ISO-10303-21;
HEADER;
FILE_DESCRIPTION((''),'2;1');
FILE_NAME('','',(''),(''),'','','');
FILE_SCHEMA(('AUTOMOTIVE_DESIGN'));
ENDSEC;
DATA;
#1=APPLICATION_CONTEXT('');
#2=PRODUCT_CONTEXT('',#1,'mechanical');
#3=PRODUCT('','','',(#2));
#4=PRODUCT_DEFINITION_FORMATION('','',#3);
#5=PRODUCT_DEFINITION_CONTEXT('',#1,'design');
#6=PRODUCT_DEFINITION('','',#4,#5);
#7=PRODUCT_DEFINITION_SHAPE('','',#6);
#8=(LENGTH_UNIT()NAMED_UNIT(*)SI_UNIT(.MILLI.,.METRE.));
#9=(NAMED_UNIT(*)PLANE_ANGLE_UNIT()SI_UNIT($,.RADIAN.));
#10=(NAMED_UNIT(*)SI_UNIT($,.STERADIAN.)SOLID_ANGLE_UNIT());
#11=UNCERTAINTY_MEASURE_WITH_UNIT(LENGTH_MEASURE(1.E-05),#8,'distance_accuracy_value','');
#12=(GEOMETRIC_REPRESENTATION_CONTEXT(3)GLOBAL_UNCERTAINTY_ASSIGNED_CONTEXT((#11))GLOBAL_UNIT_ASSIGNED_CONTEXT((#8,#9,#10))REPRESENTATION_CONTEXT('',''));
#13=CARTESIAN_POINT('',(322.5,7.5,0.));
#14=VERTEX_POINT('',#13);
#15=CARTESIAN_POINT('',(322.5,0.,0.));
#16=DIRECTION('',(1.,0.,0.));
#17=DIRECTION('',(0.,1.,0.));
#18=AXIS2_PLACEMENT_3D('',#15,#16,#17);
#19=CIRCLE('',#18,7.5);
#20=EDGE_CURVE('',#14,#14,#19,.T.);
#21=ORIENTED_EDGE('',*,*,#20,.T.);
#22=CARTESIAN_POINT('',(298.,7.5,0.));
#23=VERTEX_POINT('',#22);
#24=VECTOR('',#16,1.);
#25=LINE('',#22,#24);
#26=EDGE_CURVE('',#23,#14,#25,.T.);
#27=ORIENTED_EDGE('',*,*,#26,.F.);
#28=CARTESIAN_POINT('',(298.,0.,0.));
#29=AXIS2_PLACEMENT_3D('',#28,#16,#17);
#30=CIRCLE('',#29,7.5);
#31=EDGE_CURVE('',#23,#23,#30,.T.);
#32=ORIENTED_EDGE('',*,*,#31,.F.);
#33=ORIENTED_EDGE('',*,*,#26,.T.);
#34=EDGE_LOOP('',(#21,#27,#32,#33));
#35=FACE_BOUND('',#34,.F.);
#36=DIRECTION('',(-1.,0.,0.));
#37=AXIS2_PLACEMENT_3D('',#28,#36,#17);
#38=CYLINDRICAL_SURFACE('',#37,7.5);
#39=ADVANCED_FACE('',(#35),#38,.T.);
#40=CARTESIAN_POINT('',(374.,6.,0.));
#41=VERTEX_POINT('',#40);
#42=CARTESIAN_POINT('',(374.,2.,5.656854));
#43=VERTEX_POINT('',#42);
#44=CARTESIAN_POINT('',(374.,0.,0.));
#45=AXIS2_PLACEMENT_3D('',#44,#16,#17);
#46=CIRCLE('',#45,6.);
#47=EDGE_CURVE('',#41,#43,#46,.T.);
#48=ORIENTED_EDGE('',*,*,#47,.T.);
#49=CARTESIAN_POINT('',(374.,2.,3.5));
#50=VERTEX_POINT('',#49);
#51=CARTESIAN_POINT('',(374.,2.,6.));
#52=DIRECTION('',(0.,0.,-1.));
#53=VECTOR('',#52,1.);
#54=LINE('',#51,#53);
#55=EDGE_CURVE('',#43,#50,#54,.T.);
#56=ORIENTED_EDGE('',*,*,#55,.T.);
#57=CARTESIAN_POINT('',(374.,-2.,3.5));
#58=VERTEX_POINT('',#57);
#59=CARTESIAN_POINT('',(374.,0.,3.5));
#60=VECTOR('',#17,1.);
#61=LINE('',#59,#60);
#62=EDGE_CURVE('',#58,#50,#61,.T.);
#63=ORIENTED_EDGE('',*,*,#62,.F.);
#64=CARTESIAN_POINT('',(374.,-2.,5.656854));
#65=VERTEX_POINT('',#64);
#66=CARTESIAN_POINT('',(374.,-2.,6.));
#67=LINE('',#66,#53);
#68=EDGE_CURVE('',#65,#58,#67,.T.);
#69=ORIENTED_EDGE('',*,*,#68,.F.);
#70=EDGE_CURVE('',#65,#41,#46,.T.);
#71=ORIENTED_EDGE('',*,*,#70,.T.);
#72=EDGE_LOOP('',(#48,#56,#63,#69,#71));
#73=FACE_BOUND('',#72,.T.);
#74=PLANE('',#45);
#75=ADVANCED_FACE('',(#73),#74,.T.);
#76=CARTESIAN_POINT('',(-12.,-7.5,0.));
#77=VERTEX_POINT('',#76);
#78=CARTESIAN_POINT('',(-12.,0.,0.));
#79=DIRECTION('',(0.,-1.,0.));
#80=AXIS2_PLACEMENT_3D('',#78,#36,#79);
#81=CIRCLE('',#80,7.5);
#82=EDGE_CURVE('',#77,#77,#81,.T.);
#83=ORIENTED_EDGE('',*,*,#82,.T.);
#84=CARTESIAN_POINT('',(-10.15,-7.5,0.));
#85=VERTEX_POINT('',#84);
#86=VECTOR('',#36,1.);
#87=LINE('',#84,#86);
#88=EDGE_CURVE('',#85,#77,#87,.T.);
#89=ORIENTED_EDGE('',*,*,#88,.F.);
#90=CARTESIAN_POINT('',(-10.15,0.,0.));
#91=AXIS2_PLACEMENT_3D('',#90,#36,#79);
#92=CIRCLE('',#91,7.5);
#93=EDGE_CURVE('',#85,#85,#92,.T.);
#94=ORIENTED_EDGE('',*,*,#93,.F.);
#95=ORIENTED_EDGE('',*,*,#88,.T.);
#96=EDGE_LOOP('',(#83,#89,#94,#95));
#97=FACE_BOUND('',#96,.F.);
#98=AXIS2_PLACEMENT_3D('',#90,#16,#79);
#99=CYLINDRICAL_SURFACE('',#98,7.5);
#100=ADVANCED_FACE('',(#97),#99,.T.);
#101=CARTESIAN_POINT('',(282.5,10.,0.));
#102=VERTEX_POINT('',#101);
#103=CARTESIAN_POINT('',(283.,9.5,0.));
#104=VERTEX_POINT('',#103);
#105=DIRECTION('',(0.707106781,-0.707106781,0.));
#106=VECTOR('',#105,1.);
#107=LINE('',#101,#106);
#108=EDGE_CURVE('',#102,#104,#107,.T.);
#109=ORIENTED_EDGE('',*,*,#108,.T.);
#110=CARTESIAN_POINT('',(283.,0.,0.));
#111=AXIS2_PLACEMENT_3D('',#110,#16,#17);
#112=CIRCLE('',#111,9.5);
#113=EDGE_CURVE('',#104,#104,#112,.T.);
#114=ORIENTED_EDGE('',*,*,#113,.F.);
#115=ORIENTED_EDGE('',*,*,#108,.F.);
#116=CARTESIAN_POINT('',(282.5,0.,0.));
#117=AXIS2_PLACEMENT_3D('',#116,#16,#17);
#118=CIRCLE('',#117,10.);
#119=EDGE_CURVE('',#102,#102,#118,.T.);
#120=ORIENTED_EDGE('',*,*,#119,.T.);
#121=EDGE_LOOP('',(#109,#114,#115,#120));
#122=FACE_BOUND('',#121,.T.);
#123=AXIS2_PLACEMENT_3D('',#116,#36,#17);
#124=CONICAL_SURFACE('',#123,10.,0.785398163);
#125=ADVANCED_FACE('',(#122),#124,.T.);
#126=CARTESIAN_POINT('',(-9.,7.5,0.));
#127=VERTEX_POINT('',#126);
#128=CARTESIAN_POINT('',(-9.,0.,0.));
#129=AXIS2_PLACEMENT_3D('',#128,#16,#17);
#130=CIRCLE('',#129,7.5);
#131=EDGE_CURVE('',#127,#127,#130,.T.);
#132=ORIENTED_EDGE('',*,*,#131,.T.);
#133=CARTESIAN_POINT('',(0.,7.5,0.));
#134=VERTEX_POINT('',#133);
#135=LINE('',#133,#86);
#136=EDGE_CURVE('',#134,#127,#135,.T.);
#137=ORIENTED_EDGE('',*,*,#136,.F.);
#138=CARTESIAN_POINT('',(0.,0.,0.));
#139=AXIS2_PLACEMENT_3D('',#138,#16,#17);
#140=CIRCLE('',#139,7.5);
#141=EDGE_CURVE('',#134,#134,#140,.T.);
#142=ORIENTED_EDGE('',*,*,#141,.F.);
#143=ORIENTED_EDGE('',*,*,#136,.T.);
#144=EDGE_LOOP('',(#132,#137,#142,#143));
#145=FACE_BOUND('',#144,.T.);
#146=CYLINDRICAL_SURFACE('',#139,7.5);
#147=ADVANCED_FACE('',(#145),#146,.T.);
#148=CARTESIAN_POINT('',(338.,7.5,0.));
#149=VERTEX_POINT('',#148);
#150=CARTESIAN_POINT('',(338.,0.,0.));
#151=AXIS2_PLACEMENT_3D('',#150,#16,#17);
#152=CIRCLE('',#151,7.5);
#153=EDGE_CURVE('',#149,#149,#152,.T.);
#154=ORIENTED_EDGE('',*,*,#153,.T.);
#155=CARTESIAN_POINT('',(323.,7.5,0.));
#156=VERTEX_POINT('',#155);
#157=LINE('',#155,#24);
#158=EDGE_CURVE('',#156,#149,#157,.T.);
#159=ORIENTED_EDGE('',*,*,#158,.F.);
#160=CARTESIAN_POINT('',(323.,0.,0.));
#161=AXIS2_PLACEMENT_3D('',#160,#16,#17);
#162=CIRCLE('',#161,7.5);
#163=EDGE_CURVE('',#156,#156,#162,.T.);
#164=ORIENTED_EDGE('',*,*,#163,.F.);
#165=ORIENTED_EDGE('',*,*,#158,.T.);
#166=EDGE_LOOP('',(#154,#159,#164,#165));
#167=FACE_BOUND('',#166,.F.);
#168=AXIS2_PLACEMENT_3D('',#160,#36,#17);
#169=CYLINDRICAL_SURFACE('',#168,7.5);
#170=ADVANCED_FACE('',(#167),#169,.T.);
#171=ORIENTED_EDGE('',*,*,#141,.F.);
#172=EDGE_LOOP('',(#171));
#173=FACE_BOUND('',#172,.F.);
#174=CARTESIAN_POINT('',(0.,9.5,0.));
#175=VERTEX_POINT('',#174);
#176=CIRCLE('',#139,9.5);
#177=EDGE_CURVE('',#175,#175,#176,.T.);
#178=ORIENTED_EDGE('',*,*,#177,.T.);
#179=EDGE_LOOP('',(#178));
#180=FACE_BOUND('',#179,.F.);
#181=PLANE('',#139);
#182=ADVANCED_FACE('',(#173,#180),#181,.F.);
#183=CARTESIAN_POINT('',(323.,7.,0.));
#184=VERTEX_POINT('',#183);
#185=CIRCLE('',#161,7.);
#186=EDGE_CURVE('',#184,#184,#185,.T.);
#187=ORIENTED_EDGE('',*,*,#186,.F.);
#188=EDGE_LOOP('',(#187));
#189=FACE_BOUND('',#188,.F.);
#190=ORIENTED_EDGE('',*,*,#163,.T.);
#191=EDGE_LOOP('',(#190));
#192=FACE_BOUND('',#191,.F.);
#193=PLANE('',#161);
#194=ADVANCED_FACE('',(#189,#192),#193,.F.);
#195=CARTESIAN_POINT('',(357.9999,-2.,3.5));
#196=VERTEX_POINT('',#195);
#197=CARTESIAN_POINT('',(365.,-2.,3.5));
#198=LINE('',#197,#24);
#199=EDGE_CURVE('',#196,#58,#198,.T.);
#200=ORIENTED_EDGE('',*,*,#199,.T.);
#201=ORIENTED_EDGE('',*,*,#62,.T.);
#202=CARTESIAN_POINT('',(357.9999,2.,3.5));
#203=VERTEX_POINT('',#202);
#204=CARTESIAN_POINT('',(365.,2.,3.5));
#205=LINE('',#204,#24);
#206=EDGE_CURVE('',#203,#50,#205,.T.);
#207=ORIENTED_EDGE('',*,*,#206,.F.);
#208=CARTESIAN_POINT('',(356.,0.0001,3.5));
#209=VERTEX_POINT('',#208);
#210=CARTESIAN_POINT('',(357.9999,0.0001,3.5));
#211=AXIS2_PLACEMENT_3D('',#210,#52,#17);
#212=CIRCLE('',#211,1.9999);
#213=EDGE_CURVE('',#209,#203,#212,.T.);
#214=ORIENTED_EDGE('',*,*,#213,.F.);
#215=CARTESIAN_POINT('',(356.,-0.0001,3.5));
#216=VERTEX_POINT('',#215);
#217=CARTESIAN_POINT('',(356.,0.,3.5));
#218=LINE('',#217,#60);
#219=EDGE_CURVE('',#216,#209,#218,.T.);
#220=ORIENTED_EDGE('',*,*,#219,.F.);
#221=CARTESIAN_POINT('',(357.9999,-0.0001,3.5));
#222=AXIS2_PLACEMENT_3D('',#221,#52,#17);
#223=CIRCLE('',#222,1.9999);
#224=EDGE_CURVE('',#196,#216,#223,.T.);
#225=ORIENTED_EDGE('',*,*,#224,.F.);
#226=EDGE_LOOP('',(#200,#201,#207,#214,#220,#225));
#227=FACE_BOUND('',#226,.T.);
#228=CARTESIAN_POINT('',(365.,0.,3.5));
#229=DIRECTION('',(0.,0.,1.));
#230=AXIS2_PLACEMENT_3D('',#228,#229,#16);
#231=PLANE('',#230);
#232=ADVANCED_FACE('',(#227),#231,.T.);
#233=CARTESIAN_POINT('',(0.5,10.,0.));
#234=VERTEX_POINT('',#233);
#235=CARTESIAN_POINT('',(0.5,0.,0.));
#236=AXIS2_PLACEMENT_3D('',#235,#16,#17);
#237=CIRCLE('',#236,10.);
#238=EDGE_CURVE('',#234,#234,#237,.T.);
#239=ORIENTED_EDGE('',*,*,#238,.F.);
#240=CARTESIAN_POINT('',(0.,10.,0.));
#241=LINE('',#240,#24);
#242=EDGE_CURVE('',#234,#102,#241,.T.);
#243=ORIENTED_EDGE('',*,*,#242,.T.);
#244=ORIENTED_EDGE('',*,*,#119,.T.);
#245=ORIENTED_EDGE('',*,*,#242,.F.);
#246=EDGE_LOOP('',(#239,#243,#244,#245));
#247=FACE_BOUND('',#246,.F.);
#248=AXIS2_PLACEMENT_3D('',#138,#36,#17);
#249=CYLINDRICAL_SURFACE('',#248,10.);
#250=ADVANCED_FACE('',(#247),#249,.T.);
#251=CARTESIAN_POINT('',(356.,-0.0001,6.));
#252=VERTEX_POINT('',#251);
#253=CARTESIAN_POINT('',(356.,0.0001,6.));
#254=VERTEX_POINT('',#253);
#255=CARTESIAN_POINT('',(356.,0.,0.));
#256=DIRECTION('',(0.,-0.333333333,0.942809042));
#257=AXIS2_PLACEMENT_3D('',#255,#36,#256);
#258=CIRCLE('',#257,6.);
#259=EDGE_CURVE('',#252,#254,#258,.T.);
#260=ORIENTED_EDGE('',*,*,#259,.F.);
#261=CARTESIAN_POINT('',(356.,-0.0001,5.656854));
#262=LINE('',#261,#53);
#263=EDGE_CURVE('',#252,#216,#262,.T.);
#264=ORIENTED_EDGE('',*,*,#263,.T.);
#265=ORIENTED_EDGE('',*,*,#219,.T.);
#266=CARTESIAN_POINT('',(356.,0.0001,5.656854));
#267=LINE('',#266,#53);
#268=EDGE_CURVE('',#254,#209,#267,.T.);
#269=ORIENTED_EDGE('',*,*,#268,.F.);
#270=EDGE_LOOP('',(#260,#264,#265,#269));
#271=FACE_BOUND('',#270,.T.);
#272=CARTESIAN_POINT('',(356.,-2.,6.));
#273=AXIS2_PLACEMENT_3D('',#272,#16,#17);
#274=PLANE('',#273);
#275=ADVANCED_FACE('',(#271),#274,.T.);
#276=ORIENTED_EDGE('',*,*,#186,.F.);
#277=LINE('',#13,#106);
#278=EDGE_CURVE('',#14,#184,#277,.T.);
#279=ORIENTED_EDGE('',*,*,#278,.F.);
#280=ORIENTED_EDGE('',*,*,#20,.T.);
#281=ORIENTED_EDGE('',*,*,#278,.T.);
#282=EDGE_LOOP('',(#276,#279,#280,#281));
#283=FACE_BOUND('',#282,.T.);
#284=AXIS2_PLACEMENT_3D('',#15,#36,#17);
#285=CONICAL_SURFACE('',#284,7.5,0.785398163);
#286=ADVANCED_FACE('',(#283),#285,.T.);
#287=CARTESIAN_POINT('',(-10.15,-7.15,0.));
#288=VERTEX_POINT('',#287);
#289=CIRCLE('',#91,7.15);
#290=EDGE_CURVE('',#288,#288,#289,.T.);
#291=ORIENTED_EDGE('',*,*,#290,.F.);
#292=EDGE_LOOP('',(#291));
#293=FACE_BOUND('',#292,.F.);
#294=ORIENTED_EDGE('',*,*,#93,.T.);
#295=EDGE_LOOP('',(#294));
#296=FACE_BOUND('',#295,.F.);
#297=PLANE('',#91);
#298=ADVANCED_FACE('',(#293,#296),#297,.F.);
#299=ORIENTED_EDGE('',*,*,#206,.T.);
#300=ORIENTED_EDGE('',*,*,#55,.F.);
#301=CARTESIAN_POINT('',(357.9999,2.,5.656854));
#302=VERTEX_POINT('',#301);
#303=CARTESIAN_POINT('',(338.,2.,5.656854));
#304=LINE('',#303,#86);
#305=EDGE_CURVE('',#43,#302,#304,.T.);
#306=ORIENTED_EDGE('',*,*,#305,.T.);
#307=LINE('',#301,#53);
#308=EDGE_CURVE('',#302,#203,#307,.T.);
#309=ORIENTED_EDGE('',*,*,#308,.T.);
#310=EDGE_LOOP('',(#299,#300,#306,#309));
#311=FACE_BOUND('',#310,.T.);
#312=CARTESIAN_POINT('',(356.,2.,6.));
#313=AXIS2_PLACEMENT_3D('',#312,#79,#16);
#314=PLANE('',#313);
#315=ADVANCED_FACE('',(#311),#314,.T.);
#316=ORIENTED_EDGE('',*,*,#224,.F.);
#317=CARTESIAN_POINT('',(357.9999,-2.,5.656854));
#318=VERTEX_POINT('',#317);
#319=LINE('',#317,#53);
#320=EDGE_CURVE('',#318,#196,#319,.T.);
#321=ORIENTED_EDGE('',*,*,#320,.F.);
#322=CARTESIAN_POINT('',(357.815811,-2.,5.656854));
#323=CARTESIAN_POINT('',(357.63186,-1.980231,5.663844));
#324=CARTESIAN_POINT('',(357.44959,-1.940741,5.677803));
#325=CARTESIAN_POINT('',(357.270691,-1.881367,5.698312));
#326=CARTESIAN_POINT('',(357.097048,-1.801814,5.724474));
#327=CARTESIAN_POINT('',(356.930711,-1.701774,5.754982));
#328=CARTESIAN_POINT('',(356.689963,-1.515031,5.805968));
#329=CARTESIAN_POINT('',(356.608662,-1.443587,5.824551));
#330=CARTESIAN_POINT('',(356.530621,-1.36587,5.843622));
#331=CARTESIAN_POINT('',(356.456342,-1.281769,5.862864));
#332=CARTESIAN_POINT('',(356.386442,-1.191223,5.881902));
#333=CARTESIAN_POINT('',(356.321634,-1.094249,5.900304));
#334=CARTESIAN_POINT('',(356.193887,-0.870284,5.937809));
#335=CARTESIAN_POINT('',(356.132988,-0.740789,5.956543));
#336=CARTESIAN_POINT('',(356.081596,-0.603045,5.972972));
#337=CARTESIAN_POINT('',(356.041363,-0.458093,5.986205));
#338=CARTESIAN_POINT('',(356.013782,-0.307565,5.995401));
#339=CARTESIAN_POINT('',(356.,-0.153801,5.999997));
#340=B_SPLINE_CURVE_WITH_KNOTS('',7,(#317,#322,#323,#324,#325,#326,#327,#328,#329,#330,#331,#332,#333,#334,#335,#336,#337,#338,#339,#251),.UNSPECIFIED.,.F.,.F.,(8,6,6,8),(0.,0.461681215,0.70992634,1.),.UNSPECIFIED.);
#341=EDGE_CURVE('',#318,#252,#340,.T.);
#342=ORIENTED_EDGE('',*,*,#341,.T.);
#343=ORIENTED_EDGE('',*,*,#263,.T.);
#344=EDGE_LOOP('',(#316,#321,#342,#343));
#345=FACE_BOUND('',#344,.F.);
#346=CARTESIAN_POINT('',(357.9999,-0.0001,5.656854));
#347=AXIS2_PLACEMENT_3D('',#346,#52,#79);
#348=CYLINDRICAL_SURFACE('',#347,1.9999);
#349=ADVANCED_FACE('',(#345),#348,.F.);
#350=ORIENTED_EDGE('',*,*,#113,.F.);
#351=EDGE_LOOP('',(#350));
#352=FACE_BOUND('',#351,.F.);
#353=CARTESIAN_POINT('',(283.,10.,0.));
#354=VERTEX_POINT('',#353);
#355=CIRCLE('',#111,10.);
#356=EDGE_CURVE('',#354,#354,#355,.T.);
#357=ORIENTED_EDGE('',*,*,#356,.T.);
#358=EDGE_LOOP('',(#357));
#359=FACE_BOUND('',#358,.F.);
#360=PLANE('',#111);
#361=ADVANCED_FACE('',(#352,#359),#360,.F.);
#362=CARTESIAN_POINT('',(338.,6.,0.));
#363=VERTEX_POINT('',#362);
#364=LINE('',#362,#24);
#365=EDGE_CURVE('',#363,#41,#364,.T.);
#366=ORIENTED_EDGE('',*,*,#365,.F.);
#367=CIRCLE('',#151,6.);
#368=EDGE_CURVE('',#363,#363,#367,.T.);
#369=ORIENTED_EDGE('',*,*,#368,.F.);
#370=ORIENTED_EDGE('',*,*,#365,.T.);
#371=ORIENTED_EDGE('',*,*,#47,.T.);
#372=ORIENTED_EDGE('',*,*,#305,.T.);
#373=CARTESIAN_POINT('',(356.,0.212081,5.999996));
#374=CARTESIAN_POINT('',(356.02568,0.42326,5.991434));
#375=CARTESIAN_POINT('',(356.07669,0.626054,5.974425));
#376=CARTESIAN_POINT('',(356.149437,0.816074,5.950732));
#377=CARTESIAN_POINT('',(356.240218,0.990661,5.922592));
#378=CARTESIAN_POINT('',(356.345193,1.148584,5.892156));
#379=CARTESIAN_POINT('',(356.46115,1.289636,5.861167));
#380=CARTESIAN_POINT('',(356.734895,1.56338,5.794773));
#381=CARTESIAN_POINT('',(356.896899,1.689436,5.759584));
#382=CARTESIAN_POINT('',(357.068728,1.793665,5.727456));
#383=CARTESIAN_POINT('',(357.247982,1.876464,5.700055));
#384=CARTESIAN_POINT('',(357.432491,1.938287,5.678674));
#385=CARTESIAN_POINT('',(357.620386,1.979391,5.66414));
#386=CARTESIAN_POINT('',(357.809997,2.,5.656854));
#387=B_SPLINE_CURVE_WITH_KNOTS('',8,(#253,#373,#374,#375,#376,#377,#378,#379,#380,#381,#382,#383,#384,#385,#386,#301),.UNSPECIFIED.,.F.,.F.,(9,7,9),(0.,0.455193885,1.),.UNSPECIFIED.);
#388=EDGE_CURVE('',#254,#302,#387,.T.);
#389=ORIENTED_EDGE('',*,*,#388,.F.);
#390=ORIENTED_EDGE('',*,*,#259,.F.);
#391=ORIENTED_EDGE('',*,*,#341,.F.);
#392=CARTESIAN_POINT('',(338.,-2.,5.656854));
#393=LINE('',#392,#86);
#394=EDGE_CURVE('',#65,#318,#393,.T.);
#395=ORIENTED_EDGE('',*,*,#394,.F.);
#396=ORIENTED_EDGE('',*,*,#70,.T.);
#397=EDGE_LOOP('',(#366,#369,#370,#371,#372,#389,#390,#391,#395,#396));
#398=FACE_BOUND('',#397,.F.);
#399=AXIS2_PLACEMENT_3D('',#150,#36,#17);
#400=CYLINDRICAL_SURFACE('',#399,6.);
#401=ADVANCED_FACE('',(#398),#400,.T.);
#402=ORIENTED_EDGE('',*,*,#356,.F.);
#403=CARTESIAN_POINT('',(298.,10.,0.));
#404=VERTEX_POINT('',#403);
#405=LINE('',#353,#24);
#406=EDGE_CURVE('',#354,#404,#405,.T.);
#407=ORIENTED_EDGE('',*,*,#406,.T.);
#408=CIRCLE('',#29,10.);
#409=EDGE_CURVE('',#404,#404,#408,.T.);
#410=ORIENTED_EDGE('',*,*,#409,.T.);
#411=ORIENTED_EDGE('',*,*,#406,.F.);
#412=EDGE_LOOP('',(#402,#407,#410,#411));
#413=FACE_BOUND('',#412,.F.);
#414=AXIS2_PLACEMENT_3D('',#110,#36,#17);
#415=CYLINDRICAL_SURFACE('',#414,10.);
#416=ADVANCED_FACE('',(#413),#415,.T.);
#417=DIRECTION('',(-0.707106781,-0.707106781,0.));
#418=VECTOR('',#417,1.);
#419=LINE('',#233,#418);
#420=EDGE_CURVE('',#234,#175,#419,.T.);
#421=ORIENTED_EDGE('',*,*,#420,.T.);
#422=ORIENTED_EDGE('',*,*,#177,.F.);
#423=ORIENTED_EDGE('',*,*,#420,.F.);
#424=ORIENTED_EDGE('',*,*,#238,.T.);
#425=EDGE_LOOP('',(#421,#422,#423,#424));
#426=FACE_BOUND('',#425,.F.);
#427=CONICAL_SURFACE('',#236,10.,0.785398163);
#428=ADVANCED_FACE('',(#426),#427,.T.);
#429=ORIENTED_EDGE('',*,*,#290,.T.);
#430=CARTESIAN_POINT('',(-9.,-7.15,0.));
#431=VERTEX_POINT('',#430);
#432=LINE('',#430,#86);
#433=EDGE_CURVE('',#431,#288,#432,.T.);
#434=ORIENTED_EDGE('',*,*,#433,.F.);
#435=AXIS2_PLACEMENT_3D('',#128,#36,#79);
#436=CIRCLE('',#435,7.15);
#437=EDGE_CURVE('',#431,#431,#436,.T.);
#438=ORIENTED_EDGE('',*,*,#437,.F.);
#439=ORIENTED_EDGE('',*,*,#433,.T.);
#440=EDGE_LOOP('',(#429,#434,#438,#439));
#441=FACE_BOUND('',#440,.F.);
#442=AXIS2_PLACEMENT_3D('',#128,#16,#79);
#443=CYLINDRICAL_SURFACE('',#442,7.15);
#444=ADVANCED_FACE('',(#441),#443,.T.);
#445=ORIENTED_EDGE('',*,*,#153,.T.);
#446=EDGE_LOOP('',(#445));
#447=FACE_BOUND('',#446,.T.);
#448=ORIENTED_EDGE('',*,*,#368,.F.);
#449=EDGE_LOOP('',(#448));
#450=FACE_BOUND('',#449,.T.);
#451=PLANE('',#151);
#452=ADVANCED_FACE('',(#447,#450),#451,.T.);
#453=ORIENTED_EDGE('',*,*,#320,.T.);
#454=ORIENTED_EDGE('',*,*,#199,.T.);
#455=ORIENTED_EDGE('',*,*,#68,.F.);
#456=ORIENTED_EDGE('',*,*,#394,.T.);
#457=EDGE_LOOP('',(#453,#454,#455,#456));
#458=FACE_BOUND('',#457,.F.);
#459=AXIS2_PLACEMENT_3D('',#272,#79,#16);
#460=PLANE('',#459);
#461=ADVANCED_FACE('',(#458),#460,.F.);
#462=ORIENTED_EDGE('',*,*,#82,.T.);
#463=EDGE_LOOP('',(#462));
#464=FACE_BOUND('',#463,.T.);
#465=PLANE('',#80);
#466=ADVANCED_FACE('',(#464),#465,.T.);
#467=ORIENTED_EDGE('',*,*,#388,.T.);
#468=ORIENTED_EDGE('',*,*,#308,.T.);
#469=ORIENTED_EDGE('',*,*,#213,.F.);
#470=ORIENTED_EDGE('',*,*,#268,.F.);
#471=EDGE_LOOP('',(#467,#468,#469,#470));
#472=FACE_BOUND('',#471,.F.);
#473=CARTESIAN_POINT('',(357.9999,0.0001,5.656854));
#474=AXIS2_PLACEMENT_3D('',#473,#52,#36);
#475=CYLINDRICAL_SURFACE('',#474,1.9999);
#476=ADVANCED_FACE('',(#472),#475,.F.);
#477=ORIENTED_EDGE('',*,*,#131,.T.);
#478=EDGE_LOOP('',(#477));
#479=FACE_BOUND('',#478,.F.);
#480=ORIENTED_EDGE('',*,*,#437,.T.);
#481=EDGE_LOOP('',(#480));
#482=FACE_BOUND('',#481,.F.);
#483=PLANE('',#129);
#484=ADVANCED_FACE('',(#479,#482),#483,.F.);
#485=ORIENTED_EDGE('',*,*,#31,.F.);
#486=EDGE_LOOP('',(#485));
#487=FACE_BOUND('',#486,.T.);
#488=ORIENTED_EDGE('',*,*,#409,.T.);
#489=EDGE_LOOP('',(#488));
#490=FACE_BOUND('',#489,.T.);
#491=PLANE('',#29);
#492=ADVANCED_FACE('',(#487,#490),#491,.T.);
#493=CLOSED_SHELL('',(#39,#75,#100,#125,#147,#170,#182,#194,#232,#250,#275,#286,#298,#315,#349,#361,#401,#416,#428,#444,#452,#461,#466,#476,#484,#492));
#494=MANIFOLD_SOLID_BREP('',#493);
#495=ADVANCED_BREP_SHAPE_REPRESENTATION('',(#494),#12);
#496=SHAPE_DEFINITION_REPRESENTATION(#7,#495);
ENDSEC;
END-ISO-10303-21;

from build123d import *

# Parameters (mm, degrees)
F0_R      = 7.5
F1_DEPTH  = 9
F2_R      = 7.15
F3_DEPTH  = 1.15
F4_R      = 7.5
F5_DEPTH  = 1.85
F6_R      = 10
F7_DEPTH  = 283
F8_SIZE   = 0.5
F9_R      = 10
F10_DEPTH = 15
F11_R     = 7.5
F12_DEPTH = 25
F13_SIZE  = 0.5
F14_R     = 7.5
F15_DEPTH = 15
F16_R     = 6
F17_DEPTH = 36
F19_W     = 18
F19_H     = 4
F20_DEPTH = 2.5
F21_R     = 1.9999


# Not quite as in the source:
# - a fillet or chamfer is up to 0.001 mm smaller than in the source, because OpenCascade refuses the exact size


with BuildPart() as f1:
    # F0 (on Right) → F1 (new body)
    with BuildSketch(Plane.YZ):
        Circle(F0_R)
    extrude(amount=-F1_DEPTH)

    # F2 (on face) → F3 (join)
    with BuildSketch(Plane(origin=(-9, 0, 0), x_dir=(0, -1, 0), z_dir=(-1, 0, 0))):
        Circle(F2_R)
    extrude(amount=F3_DEPTH)

    # F4 (on face) → F5 (join)
    with BuildSketch(Plane(origin=(-10.15, 0, 0), x_dir=(0, -1, 0), z_dir=(-1, 0, 0))):
        Circle(F4_R)
    extrude(amount=F5_DEPTH)

    # F6 (on Right) → F7 (join)
    with BuildSketch(Plane.YZ):
        Circle(F6_R)
    extrude(amount=F7_DEPTH)

    # F8
    f8_edges = [f1.edges().sort_by_distance(p)[0] for p in [
        (283, -10, 0),
        (0, -10, 0),
    ]]
    chamfer(f8_edges, length=F8_SIZE)

    # F9 (on face) → F10 (join)
    with BuildSketch(Plane.YZ.offset(283)):
        Circle(F9_R)
    extrude(amount=F10_DEPTH)

    # F11 (on face) → F12 (join)
    with BuildSketch(Plane.YZ.offset(298)):
        Circle(F11_R)
    extrude(amount=F12_DEPTH)

    # F13
    f13_edges = [f1.edges().sort_by_distance(p)[0] for p in [
        (323, -7.5, 0),
    ]]
    chamfer(f13_edges, length=F13_SIZE)

    # F14 (on face) → F15 (join)
    with BuildSketch(Plane.YZ.offset(323)):
        Circle(F14_R)
    extrude(amount=F15_DEPTH)

    # F16 (on face) → F17 (join)
    with BuildSketch(Plane.YZ.offset(338)):
        Circle(F16_R)
    extrude(amount=F17_DEPTH)

    # F19 (on offset) → F20 (cut)
    with BuildSketch(Plane.XY.offset(6)):
        with Locations((365, 0)):
            Rectangle(F19_W, F19_H)
    extrude(amount=-F20_DEPTH, mode=Mode.SUBTRACT)

    # F21 (radius 2 in the source; OpenCascade refuses exactly that, so slightly less here)
    f21_edges = [f1.edges().sort_by_distance(p)[0] for p in [
        (356, 2, 4.578427),
        (356, -2, 4.578427),
    ]]
    fillet(f21_edges, radius=F21_R)


solid = f1.part
